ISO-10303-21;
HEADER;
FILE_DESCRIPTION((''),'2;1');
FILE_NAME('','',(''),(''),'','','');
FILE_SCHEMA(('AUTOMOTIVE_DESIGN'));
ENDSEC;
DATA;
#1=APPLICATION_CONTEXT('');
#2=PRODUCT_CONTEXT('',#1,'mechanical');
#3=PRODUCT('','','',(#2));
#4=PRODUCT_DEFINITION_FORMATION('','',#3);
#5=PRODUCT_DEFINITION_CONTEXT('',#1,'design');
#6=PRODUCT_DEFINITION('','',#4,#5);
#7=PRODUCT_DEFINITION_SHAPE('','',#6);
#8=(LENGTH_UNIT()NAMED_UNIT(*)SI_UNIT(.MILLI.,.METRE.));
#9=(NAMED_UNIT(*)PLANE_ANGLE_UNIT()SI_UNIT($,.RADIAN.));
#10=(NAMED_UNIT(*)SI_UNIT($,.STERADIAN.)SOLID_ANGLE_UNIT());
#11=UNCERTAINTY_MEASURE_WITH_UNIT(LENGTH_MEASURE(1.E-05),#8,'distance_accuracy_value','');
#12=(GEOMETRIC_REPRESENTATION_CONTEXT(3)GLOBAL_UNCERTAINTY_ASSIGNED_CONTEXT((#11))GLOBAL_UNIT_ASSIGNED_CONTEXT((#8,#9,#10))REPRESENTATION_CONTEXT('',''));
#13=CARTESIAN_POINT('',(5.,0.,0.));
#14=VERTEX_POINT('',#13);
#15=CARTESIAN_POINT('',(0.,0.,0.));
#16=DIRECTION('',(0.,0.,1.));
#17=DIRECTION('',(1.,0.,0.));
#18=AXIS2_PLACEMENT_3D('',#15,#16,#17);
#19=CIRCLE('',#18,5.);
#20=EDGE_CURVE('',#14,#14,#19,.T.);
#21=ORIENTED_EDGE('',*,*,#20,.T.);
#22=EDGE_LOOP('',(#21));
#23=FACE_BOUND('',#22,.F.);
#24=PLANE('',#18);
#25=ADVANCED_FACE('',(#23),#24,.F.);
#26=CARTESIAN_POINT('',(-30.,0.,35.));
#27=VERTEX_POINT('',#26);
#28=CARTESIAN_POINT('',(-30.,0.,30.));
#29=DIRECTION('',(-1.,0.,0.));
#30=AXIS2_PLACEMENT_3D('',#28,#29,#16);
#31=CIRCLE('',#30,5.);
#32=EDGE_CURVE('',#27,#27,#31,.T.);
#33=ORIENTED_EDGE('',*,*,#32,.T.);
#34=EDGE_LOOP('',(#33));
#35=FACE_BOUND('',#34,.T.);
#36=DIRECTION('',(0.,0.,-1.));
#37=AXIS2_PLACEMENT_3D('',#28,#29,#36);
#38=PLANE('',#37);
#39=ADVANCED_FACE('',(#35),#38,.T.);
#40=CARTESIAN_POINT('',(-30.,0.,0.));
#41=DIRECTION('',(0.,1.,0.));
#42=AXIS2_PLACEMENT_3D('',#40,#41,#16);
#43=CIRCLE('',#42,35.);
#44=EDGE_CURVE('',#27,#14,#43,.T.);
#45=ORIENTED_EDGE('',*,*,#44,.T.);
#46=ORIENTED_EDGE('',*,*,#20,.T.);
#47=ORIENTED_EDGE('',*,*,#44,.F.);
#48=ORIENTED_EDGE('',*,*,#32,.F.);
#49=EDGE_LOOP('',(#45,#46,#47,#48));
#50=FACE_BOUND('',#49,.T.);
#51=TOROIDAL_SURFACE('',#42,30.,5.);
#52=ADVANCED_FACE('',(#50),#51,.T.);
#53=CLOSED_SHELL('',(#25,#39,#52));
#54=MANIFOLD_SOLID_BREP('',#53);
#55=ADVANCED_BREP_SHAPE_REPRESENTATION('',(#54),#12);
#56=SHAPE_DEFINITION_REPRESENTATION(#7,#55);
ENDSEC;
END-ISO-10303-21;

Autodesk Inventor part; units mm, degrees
ref_plane "YZ Plane" through (0, 0, 0) normal (1, 0, 0) x (0, 1, 0)
ref_plane "XZ Plane" through (0, 0, 0) normal (0, 1, 0) x (-1, 0, 0)
ref_plane "XY Plane" through (0, 0, 0) normal (0, 0, 1) x (1, 0, 0)
sketch "Sketch1" plane through (0, 0, 0) normal (0, 0, 1) x (1, 0, 0)
  circle A0 centre (0, 0) radius 5
  dimension "d0" = 0
sketch "Sketch2" plane through (0, 0, 0) normal (0, 1, 0) x (-1, 0, 0)
  arc A0 (30, 30) -> (0, 0) centre (30, 0) ccw
  dimension "d0" = 0
sweep "Sweep1" add profiles "Sketch1" path "Sketch2"
properties part number "30_sweep_arc"
